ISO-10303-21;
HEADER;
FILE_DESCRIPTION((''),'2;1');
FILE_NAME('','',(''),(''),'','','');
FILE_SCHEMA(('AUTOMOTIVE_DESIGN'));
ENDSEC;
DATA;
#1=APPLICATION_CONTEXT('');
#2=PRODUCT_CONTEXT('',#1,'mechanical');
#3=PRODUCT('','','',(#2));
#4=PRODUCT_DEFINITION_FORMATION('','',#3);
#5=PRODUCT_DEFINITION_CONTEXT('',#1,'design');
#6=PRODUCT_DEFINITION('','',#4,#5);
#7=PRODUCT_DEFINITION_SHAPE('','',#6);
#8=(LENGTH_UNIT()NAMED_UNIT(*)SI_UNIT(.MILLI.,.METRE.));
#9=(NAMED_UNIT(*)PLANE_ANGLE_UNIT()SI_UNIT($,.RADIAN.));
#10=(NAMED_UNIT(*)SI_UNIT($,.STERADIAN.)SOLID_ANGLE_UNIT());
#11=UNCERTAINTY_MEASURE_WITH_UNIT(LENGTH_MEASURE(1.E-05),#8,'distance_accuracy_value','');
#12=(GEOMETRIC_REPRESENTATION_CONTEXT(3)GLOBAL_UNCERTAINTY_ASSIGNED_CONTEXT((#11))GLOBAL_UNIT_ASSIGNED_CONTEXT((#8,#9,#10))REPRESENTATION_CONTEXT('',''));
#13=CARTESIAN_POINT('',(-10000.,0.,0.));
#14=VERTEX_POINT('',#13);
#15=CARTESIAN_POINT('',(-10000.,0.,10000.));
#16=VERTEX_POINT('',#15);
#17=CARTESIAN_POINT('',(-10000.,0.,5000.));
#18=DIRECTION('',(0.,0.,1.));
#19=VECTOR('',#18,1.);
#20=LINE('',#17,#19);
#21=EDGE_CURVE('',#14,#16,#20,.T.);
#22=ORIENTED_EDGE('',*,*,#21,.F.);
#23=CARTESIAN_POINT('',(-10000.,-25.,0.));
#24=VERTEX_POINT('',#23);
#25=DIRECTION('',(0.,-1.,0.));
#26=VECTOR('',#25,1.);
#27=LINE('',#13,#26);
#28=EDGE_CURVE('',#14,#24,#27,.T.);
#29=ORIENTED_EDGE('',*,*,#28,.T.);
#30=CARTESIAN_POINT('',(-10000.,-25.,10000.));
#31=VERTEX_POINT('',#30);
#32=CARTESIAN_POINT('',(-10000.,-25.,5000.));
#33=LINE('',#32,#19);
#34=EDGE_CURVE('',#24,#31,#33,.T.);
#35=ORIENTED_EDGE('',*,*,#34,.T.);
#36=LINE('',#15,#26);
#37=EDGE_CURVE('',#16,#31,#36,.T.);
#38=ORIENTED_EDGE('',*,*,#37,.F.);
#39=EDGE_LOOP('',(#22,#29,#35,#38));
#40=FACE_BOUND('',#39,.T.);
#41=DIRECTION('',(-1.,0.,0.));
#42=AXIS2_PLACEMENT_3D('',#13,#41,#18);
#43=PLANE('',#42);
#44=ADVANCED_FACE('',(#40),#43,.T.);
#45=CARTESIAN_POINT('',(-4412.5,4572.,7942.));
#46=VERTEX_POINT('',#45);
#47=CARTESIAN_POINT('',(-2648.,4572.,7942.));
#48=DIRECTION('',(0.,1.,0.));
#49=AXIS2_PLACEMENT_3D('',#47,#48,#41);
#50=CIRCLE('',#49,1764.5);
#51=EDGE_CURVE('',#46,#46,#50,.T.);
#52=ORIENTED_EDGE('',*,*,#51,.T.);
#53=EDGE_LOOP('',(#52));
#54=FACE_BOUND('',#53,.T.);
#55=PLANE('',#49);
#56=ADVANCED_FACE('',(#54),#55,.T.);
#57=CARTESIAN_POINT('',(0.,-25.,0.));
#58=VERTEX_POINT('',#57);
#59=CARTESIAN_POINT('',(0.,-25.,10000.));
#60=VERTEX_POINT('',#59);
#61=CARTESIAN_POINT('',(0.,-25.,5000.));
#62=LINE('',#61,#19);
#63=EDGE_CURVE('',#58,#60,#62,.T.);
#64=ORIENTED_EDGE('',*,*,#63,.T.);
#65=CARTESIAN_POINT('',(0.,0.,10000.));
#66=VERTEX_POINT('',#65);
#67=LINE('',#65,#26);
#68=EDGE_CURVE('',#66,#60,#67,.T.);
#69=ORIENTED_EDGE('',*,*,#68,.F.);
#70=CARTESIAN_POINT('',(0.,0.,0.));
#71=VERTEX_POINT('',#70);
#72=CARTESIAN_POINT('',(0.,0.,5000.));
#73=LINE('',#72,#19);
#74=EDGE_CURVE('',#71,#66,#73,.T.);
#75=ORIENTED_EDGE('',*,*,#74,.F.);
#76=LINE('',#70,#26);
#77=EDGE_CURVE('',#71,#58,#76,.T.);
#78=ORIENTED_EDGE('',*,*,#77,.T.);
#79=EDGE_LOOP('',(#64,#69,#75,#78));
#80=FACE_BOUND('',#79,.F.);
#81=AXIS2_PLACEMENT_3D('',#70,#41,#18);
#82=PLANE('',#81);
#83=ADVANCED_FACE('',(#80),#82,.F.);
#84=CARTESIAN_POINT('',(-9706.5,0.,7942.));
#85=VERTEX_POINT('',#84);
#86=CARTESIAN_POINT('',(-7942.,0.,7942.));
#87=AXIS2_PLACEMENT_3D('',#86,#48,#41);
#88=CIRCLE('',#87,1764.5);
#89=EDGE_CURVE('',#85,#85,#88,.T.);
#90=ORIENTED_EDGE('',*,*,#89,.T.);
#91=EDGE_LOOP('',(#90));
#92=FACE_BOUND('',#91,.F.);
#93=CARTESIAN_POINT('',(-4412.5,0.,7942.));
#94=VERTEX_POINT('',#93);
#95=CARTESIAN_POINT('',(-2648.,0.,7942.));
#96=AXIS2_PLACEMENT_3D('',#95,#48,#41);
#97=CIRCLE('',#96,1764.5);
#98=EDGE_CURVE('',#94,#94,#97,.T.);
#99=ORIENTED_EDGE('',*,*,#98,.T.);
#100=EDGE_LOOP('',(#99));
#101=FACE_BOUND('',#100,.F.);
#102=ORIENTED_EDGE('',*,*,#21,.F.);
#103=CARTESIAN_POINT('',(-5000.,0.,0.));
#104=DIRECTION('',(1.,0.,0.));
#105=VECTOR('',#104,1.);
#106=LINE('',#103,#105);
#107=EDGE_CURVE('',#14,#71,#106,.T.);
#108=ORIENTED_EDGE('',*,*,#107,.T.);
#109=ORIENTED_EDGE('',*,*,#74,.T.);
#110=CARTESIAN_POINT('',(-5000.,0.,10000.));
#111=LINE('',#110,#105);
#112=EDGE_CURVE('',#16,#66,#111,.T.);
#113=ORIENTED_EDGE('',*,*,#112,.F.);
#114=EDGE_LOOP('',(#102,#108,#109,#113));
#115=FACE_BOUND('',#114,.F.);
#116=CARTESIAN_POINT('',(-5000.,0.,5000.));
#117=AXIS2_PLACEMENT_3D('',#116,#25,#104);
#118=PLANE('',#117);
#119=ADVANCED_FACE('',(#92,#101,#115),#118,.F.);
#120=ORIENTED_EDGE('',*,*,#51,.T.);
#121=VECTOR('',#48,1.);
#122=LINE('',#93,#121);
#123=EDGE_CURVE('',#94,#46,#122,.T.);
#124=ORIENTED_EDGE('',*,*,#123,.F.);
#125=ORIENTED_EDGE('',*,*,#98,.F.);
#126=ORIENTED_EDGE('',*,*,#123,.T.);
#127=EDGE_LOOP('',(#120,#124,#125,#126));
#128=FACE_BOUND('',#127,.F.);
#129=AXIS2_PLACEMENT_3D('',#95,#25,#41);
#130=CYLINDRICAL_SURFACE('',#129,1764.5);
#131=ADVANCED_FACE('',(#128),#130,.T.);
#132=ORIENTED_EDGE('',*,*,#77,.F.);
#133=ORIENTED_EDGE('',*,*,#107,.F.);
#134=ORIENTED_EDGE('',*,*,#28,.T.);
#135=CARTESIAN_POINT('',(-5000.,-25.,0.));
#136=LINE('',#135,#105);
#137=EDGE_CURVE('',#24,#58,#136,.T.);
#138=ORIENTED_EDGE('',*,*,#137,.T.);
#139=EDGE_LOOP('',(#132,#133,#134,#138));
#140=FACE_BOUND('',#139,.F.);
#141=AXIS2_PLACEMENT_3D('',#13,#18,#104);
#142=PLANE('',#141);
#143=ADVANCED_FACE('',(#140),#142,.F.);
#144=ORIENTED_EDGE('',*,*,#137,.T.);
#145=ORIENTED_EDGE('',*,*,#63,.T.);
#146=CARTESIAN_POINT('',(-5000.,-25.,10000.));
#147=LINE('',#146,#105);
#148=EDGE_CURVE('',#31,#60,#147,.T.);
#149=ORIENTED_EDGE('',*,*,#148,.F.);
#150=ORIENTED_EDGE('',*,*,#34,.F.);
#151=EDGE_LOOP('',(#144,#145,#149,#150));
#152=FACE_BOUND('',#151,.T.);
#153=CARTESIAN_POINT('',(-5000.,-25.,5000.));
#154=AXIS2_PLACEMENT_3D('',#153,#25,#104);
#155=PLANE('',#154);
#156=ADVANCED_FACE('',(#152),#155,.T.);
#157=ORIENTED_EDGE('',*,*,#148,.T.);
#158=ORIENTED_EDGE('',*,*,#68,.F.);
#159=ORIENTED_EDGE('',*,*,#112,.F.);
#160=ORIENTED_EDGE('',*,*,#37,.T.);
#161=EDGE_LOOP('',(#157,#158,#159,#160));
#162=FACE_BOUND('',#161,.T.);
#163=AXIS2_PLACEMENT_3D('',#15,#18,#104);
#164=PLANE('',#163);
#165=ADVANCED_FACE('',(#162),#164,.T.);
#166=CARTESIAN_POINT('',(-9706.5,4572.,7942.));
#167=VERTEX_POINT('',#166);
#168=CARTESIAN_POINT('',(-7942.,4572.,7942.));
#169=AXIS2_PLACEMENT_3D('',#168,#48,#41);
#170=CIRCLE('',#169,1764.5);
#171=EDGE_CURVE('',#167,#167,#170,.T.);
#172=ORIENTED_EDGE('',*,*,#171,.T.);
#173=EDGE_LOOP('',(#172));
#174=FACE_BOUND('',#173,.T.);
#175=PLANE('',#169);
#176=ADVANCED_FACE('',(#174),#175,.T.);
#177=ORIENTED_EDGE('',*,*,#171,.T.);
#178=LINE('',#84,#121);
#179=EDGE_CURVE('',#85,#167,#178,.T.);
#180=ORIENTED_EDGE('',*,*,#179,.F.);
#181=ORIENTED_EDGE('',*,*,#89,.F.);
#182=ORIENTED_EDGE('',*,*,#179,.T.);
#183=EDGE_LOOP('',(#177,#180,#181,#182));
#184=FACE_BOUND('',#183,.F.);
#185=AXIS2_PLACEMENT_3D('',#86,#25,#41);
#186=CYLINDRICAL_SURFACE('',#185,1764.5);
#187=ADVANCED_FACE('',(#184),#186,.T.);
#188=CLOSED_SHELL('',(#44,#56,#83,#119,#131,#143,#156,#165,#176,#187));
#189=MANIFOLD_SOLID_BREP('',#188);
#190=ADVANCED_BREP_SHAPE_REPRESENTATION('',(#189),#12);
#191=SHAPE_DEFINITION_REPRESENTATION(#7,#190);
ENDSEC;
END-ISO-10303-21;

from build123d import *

# Parameters (mm, degrees)
F0_W     = 10000
F0_H     = 10000
F1_DEPTH = 25
F2_R     = 1764.5
F3_DEPTH = 4572


# Not quite as in the source:
# - a feature names something its author has since deleted; it is built from what else it names


with BuildPart() as f1:
    # F0 (on Front) → F1 (new body)
    with BuildSketch(Plane.XZ):
        with Locations((-5000, 5000)):
            Rectangle(F0_W, F0_H)
    extrude(amount=F1_DEPTH)

    # F2 (on face) → F3 (join)
    with BuildSketch(Plane(origin=(0, 0, 0), x_dir=(-1, 0, 0), z_dir=(0, 1, 0))):
        with Locations((2648, 7942)):
            Circle(F2_R)
        with Locations((7942, 7942)):
            Circle(F2_R)
    extrude(amount=F3_DEPTH)


solid = f1.part
